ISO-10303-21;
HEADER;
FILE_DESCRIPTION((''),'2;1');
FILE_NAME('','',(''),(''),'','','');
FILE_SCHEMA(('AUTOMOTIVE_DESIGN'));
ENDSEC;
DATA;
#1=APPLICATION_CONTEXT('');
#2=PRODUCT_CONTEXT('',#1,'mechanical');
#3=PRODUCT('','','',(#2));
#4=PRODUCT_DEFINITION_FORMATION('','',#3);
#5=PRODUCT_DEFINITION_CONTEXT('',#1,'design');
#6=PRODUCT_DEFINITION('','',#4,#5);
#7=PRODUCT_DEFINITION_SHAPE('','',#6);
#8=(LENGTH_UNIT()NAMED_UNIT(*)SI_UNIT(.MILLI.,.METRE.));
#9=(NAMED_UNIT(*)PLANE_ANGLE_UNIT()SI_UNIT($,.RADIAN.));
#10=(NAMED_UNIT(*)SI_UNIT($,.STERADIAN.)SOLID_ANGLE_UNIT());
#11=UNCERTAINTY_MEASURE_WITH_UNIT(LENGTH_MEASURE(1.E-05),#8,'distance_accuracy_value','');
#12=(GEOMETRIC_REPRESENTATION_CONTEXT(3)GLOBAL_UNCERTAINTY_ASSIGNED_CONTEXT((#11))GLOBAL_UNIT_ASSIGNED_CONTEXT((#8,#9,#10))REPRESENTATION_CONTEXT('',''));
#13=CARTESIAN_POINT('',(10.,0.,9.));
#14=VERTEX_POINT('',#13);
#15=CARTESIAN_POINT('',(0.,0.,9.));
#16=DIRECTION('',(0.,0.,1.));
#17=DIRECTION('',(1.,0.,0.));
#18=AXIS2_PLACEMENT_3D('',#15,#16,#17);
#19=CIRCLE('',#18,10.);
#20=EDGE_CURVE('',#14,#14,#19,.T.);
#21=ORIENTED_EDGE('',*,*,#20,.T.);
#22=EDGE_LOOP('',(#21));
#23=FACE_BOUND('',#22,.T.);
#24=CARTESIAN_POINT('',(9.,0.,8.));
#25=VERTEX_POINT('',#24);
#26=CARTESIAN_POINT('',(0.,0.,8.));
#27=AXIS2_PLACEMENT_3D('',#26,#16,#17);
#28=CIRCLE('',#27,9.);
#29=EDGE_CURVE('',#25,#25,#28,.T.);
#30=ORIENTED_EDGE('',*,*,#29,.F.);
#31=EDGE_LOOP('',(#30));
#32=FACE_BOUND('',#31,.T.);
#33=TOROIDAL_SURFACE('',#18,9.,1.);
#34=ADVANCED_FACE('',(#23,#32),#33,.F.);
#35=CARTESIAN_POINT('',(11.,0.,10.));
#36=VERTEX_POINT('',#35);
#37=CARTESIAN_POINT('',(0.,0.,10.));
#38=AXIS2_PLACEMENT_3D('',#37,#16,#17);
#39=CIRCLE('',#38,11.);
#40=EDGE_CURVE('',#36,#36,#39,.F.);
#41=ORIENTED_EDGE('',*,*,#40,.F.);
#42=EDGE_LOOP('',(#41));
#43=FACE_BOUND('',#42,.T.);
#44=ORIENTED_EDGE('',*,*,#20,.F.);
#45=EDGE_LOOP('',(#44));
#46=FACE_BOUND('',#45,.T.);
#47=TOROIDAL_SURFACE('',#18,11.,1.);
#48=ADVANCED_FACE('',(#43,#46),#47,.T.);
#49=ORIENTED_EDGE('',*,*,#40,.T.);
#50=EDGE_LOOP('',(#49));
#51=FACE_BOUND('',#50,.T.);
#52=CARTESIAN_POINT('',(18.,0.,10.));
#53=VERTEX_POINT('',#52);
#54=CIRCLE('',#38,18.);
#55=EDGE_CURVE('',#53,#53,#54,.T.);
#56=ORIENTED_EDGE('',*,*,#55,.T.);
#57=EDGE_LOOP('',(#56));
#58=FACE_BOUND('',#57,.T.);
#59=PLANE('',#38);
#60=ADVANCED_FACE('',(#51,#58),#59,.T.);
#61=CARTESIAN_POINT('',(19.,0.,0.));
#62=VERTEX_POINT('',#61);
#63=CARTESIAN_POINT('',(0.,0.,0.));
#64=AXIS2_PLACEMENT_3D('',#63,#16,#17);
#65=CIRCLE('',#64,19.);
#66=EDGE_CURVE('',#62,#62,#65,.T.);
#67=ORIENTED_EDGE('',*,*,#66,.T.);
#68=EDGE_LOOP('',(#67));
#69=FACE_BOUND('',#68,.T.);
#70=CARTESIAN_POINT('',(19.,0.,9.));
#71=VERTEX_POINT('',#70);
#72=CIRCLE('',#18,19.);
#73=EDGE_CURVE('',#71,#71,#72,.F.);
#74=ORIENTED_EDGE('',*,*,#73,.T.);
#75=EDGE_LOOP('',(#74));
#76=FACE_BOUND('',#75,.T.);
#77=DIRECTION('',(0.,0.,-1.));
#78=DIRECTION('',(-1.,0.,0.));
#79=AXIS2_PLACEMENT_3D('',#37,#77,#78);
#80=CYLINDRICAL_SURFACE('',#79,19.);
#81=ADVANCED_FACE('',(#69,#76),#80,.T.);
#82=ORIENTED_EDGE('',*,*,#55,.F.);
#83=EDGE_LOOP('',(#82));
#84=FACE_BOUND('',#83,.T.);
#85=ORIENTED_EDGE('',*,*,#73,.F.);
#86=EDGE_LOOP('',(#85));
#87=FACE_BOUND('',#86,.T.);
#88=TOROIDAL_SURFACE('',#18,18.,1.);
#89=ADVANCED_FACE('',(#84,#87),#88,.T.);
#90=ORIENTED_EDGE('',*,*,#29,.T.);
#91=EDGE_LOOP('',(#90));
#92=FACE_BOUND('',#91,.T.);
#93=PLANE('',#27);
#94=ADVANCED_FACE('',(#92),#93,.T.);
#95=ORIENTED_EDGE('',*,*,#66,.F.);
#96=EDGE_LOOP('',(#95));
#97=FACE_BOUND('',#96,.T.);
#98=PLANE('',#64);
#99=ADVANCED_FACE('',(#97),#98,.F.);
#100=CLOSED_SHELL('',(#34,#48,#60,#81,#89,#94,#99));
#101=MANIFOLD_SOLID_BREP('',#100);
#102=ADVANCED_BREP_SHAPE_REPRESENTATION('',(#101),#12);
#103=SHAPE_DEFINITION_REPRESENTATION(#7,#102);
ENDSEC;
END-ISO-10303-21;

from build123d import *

# Parameters (mm, degrees)
SKETCH1_R           = 19
BOSS_EXTRUDE1_DEPTH = 10
SKETCH2_R           = 10
CUT_EXTRUDE1_DEPTH  = 2
FILLET1_R           = 1


with BuildPart() as part:
    # Sketch1 → Boss-Extrude1 (new body)
    with BuildSketch(Plane.XY):
        Circle(SKETCH1_R)
    extrude(amount=BOSS_EXTRUDE1_DEPTH)

    # Sketch2 → Cut-Extrude1 (cut)
    with BuildSketch(Plane.XY.offset(10)):
        Circle(SKETCH2_R)
    extrude(amount=-CUT_EXTRUDE1_DEPTH, mode=Mode.SUBTRACT)

    # Fillet1
    fillet1_edges = [part.edges().sort_by_distance(p)[0] for p in [
        (-19, 0, 10),
        (-10, 0, 8),
        (-10, 0, 10),
    ]]
    fillet(fillet1_edges, radius=FILLET1_R - 0.0001)  # a hair under: the kernel refuses the full size


solid = part.part
